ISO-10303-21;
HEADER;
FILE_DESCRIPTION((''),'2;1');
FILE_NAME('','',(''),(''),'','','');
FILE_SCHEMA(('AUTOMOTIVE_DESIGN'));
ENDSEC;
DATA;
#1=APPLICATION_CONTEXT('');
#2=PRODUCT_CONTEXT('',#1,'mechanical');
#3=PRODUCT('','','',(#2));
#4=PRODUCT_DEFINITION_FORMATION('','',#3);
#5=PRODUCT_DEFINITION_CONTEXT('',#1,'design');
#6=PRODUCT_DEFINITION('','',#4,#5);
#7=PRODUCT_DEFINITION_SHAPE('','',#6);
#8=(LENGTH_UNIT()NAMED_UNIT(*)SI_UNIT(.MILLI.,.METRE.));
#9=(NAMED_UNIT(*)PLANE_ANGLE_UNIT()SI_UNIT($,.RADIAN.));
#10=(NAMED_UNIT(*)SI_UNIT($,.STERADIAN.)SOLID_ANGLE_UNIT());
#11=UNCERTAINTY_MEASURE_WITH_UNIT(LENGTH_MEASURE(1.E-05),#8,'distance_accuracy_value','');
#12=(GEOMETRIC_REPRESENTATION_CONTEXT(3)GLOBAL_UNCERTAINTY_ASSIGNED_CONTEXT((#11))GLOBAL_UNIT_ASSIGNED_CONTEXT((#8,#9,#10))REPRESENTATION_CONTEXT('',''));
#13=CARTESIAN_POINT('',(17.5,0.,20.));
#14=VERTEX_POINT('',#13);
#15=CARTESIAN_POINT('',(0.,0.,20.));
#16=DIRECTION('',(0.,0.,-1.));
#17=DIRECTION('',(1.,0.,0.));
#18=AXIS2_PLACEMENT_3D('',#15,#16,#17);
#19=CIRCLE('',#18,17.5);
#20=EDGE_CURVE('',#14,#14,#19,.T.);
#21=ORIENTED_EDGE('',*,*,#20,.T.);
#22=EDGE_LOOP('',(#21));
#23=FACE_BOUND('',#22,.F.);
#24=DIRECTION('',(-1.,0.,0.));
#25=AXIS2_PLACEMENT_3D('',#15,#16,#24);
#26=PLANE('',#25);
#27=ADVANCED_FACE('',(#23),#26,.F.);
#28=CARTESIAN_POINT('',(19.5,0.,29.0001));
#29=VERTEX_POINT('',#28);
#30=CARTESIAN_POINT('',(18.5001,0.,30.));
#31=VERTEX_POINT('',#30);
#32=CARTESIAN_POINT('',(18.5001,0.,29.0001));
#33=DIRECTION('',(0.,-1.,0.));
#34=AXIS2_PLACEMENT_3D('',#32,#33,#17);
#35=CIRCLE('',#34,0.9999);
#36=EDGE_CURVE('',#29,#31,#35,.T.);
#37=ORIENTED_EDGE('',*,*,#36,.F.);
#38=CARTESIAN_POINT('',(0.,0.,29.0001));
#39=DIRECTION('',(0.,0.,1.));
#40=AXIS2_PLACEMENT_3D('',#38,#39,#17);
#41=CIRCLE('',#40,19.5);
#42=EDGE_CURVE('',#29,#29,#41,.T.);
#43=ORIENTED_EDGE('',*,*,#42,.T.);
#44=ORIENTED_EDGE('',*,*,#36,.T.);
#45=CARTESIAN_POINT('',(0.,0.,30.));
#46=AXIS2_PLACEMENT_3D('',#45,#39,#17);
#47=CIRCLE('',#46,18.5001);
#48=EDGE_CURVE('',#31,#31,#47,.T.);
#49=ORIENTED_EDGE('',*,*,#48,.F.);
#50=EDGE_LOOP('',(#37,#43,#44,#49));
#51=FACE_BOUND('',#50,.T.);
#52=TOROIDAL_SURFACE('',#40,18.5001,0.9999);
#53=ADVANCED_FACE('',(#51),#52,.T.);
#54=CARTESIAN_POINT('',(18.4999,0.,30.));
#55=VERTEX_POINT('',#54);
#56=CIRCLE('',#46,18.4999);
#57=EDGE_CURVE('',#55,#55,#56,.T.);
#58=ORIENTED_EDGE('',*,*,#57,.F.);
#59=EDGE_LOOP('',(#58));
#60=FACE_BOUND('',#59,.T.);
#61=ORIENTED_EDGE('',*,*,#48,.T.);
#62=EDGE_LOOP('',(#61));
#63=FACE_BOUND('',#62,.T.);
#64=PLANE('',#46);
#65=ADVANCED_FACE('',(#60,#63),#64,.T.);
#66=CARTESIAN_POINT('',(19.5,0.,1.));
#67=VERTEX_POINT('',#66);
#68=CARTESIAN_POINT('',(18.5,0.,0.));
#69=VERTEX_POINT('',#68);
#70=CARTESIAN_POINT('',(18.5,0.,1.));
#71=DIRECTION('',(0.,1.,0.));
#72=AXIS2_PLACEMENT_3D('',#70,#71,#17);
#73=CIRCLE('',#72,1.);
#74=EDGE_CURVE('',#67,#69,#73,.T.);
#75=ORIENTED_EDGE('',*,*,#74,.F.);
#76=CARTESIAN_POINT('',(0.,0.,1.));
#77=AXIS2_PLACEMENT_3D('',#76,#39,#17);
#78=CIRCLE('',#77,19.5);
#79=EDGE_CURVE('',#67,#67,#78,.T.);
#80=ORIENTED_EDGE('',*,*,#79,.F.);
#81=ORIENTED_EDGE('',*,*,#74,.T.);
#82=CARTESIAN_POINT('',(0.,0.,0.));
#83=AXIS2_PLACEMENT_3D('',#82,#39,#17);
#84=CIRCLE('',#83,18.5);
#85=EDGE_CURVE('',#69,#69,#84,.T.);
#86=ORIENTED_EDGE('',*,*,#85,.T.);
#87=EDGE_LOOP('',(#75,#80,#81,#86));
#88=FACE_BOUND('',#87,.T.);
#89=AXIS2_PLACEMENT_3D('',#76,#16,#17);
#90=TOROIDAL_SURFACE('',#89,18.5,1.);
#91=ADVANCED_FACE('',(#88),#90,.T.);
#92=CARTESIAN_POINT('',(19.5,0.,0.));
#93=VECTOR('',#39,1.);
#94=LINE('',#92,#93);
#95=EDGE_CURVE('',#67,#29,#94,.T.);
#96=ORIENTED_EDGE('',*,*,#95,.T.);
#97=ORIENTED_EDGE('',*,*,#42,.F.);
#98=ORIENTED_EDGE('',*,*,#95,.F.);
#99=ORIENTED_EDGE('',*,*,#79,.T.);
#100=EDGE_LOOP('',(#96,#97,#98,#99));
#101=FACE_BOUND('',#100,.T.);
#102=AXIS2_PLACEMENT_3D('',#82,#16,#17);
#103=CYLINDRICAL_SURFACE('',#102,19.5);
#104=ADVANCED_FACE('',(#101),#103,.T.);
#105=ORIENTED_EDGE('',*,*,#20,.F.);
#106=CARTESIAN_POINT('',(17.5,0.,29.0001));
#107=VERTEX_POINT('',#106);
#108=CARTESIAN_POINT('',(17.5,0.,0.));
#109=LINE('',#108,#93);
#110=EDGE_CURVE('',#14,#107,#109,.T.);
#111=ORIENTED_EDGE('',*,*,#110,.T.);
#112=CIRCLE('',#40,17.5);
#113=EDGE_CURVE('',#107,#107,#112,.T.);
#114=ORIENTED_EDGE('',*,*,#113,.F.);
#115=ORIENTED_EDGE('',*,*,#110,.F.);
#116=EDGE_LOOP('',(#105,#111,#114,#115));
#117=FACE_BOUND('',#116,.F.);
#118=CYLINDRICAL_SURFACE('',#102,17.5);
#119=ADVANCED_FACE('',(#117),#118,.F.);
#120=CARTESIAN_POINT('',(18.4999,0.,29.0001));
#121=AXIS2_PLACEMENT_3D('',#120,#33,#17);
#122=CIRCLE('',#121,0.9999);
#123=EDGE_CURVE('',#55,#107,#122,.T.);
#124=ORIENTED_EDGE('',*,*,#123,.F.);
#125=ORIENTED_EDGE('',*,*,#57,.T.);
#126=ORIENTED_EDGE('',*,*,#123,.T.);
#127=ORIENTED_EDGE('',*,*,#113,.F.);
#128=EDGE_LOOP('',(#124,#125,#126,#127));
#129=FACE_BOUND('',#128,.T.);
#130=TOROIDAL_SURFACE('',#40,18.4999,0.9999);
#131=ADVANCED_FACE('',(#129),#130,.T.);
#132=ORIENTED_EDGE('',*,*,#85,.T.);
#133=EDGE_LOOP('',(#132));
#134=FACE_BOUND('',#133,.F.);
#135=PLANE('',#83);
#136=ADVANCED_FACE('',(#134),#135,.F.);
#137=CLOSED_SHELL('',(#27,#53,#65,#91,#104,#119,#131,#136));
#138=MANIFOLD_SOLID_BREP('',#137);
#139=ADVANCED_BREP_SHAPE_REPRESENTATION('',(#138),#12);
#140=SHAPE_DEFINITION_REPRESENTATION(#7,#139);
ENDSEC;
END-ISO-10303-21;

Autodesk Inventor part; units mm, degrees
ref_plane "YZ Plane" through (0, 0, 0) normal (1, 0, 0) x (0, 1, 0)
ref_plane "XZ Plane" through (0, 0, 0) normal (0, 1, 0) x (-1, 0, 0)
ref_plane "XY Plane" through (0, 0, 0) normal (0, 0, 1) x (1, 0, 0)
sketch "Skizze2" plane through (0, 0, 0) normal (0, 0, 1) x (1, 0, 0)
  circle A0 centre (0, 0) radius 17.5
  circle A1 centre (0, 0) radius 19.5
  dimension "d0" = 35
  dimension "d1" = 39
extrude "Extrusion1" add sketch "Skizze2" along normal blind 30
sketch "Skizze3" plane through (0, 0, 0) normal (0, 0, -1) x (-1, 0, 0)
  circle A0 centre (0, 0) radius 17.5
extrude "Extrusion2" add sketch "Skizze3" against normal blind 20
fillet "Rundung1" radius 1 2 edges at (-17.5, 0, 30) (-19.5, 0, 30)
fillet "Rundung2" radius 1 1 edges at (-19.5, 0, 0)
properties part number "plug"
